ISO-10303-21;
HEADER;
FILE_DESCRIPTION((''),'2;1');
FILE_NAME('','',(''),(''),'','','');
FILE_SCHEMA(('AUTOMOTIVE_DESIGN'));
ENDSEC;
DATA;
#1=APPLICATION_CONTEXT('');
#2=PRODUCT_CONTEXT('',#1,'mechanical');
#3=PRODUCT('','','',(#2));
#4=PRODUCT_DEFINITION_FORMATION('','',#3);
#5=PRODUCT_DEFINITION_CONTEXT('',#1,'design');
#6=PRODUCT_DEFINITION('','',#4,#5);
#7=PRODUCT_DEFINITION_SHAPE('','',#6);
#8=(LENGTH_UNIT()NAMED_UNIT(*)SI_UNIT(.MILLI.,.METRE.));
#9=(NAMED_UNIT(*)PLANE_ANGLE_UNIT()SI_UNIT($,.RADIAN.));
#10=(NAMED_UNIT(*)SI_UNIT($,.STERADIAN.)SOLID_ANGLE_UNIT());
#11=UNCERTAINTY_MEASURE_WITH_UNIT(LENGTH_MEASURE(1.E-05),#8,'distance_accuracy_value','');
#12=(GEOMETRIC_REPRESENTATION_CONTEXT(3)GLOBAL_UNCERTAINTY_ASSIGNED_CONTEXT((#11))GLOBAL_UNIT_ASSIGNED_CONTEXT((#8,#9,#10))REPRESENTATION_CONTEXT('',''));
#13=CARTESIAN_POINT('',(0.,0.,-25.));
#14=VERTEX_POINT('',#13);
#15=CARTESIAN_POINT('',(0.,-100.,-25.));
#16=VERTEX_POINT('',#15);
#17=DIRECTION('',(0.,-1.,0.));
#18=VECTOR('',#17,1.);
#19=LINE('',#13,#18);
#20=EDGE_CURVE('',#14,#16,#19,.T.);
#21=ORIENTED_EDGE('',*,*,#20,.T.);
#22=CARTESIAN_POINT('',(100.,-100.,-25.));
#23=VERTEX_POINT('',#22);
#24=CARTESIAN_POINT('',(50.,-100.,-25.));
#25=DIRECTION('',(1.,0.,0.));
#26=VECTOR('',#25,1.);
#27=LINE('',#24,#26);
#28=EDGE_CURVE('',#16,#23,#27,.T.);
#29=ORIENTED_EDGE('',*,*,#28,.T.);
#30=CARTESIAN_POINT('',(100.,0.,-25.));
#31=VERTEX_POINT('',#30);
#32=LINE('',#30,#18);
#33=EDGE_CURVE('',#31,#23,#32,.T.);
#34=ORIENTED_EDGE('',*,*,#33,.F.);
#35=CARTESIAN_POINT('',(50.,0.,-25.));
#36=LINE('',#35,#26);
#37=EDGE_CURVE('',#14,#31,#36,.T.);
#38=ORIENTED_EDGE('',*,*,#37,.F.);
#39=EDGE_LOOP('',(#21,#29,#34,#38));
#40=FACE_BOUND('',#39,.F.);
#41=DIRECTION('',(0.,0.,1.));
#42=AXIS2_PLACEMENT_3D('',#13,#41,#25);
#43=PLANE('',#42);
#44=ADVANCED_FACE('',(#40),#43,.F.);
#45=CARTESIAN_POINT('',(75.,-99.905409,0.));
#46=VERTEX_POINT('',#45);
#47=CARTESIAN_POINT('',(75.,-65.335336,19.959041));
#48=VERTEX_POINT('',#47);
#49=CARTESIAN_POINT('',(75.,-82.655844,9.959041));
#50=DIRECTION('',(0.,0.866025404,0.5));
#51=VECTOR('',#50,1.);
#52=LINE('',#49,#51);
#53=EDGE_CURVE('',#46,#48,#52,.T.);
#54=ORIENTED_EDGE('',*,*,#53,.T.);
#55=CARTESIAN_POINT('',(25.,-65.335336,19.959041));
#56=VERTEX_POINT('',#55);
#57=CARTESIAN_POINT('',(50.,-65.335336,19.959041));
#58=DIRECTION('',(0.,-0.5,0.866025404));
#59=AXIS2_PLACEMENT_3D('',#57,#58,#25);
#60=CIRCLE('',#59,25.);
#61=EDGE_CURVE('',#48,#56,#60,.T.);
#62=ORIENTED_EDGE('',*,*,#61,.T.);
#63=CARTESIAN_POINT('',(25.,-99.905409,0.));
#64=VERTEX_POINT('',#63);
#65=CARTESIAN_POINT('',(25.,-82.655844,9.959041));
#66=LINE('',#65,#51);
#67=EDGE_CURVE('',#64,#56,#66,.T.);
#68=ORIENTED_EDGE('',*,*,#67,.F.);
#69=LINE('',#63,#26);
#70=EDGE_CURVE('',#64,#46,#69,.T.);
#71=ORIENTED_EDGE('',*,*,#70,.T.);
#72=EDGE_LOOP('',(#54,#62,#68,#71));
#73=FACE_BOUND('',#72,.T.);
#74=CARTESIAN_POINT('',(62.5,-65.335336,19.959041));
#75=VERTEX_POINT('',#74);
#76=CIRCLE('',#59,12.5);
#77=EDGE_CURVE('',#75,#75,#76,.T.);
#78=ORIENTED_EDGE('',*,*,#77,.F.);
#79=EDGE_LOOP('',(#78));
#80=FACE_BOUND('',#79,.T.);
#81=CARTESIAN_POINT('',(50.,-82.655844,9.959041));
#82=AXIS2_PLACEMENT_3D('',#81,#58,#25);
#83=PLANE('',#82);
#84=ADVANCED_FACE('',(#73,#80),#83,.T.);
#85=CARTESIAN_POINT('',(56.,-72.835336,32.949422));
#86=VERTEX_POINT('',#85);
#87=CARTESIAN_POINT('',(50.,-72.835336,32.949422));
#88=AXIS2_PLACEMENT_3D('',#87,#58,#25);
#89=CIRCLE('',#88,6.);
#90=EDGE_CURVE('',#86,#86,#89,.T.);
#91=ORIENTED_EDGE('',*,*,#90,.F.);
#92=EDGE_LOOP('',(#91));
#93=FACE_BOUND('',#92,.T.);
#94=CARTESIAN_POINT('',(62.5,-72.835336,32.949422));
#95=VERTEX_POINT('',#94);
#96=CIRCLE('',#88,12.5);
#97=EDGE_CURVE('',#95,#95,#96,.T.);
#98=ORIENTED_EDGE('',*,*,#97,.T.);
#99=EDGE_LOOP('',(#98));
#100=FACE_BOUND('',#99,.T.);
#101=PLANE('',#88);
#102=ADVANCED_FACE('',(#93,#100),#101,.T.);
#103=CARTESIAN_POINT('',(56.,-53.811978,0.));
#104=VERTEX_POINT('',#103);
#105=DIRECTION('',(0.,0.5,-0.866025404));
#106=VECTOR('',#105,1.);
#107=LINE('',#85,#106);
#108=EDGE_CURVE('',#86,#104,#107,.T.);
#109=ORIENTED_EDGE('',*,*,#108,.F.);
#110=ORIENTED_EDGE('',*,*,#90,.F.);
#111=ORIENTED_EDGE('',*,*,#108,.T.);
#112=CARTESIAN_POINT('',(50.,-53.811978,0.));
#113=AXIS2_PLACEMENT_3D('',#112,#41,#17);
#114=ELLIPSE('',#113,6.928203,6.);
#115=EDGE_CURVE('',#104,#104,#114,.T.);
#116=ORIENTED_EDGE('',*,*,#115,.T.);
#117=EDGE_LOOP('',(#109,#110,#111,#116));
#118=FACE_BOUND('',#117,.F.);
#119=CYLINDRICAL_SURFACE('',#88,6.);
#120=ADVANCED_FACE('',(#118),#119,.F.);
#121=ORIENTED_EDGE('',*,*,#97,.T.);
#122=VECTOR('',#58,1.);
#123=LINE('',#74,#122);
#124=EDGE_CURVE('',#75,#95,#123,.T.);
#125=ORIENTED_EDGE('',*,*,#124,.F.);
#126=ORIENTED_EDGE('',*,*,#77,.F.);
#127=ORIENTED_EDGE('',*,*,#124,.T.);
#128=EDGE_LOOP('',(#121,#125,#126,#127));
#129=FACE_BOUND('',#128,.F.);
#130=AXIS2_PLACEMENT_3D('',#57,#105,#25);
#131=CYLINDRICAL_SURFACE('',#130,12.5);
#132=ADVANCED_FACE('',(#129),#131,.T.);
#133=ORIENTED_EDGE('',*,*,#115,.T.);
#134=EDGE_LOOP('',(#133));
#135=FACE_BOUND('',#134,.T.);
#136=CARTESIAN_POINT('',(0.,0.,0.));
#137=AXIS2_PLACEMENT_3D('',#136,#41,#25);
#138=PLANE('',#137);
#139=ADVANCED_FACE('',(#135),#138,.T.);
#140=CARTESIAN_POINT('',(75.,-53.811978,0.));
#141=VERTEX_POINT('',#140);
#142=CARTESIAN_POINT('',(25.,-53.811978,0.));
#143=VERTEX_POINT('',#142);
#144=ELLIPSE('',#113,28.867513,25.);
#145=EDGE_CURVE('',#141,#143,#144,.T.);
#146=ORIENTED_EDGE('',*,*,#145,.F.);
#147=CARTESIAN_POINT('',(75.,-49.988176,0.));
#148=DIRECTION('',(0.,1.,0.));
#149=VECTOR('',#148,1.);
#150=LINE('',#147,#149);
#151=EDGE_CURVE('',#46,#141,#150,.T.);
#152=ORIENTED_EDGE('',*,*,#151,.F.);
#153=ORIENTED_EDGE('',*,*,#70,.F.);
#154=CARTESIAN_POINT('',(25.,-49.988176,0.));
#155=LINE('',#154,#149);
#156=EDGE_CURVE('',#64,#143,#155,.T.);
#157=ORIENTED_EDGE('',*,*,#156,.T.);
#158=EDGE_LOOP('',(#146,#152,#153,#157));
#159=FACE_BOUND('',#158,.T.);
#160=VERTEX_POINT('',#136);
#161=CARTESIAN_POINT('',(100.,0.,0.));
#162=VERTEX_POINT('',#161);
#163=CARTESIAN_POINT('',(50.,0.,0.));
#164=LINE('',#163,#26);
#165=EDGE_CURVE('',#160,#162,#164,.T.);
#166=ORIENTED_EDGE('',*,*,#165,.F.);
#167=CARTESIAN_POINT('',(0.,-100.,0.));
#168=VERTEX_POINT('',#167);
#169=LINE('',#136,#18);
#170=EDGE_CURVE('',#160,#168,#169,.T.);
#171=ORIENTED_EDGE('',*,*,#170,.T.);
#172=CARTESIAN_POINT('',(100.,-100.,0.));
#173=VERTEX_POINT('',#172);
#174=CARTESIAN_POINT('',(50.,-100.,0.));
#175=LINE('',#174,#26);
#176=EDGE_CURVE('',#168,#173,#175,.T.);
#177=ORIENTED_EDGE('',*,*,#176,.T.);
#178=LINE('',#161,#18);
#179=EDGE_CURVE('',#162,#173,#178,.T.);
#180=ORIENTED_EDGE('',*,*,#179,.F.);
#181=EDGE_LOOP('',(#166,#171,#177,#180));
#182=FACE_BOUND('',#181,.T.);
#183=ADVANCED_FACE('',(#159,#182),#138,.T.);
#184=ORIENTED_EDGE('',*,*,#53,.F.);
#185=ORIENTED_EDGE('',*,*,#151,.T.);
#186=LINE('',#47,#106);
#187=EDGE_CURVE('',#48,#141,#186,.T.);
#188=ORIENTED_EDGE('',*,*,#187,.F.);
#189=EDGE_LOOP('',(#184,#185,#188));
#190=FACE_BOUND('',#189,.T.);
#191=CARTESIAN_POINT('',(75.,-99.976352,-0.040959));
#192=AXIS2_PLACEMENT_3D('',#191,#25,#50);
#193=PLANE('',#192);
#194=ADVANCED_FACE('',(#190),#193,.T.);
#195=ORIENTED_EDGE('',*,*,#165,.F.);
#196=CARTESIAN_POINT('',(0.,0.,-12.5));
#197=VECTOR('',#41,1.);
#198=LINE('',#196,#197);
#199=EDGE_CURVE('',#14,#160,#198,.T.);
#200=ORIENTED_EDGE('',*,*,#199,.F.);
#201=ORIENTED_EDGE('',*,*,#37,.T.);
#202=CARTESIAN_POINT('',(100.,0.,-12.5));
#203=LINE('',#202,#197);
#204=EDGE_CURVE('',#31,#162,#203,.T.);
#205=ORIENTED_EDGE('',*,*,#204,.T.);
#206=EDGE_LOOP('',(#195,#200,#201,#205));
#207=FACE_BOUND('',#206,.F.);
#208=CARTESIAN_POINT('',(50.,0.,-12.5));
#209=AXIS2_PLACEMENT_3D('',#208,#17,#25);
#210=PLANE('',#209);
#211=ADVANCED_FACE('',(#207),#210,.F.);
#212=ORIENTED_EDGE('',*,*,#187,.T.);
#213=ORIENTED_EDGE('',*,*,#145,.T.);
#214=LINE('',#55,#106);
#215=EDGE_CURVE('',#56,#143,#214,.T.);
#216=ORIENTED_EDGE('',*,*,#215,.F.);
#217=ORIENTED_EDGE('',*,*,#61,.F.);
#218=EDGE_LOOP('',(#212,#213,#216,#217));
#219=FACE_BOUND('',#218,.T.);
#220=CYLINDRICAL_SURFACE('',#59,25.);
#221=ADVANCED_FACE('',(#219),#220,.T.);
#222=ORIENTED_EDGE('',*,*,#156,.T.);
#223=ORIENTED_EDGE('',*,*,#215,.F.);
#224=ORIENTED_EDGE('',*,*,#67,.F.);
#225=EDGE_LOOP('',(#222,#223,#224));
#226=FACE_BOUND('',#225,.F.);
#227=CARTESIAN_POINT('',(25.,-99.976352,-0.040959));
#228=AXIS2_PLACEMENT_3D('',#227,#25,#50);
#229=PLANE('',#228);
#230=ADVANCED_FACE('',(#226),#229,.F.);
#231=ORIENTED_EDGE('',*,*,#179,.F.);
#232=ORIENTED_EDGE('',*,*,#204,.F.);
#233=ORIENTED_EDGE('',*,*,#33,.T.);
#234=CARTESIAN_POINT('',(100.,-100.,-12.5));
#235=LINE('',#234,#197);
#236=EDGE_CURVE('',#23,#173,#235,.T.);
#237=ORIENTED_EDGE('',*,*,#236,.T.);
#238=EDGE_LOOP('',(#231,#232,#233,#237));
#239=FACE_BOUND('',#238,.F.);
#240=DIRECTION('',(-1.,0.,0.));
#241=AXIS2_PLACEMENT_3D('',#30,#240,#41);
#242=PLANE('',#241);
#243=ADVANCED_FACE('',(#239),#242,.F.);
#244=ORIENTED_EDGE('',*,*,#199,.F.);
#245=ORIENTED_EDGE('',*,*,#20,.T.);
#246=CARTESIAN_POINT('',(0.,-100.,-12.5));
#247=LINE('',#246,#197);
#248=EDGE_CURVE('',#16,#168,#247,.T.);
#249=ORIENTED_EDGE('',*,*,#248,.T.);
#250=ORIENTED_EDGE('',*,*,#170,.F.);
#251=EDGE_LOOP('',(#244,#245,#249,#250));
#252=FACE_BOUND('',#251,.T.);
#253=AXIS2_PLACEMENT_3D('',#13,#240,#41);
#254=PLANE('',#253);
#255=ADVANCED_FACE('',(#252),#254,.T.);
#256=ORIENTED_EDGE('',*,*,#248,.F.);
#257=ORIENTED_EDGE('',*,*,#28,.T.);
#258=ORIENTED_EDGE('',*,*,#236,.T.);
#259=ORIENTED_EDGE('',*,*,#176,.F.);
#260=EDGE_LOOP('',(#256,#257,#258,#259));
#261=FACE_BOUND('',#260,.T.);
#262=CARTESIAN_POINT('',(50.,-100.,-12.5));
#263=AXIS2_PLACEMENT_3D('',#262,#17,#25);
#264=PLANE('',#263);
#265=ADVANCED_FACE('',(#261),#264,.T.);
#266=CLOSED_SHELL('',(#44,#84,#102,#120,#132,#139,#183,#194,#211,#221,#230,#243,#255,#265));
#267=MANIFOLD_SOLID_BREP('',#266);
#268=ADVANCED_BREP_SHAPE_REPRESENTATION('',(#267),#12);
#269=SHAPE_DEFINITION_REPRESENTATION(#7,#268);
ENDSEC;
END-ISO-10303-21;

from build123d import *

# Parameters (mm, degrees)
F0_W      = 100
F0_H      = 25
F1_DEPTH  = 100
F7_W      = 50
F7_H      = 40
F8_R      = 25
F9_R      = 12.5
F12_DEPTH = 15
F13_R     = 6
F14_REACH = 55.0172779755


with BuildPart() as f1:
    # F0 (on Front) → F1 (new body)
    with BuildSketch(Plane.XZ):
        with Locations((50, -12.5)):
            Rectangle(F0_W, F0_H)
    extrude(amount=F1_DEPTH)

    # F7 (on line) + F8 (on line) → F11 (join, up to the next surface of F1)
    with BuildSketch(Plane(origin=(0, -24.9763522297, 43.2603110496), x_dir=(1, 0, 0), z_dir=(0, -0.5, 0.8660254038))):
        with Locations((50, -66.6025403784)):
            Rectangle(F7_W, F7_H)
    with BuildSketch(Plane(origin=(0, -24.9763522297, 43.2603110496), x_dir=(1, 0, 0), z_dir=(0, -0.5, 0.8660254038))):
        with Locations((50, -46.6025403784)):
            Circle(F8_R)
    extrude(until=Until.NEXT, dir=(0, 0.5, -0.8660254038))

    # F9 (on line) → F12 (join)
    with BuildSketch(Plane(origin=(0, -24.9763522297, 43.2603110496), x_dir=(1, 0, 0), z_dir=(0, -0.5, 0.8660254038))):
        with Locations((50, -46.6025403784)):
            Circle(F9_R)
    extrude(amount=F12_DEPTH)

    f14_end = Plane.XY
    # F13 (on face) → F14 (cut, up to a plane its end follows)
    with BuildSketch(Plane(origin=(0, -32.4763522297, 56.2506921064), x_dir=(1, 0, 0), z_dir=(0, -0.5, 0.8660254038))):
        with Locations((50, -46.6025403784)):
            Circle(F13_R)
    f14_long = extrude(amount=-F14_REACH, mode=Mode.PRIVATE)
    add(split(f14_long, bisect_by=f14_end, keep=Keep.TOP, mode=Mode.PRIVATE), mode=Mode.SUBTRACT)


solid = f1.part
